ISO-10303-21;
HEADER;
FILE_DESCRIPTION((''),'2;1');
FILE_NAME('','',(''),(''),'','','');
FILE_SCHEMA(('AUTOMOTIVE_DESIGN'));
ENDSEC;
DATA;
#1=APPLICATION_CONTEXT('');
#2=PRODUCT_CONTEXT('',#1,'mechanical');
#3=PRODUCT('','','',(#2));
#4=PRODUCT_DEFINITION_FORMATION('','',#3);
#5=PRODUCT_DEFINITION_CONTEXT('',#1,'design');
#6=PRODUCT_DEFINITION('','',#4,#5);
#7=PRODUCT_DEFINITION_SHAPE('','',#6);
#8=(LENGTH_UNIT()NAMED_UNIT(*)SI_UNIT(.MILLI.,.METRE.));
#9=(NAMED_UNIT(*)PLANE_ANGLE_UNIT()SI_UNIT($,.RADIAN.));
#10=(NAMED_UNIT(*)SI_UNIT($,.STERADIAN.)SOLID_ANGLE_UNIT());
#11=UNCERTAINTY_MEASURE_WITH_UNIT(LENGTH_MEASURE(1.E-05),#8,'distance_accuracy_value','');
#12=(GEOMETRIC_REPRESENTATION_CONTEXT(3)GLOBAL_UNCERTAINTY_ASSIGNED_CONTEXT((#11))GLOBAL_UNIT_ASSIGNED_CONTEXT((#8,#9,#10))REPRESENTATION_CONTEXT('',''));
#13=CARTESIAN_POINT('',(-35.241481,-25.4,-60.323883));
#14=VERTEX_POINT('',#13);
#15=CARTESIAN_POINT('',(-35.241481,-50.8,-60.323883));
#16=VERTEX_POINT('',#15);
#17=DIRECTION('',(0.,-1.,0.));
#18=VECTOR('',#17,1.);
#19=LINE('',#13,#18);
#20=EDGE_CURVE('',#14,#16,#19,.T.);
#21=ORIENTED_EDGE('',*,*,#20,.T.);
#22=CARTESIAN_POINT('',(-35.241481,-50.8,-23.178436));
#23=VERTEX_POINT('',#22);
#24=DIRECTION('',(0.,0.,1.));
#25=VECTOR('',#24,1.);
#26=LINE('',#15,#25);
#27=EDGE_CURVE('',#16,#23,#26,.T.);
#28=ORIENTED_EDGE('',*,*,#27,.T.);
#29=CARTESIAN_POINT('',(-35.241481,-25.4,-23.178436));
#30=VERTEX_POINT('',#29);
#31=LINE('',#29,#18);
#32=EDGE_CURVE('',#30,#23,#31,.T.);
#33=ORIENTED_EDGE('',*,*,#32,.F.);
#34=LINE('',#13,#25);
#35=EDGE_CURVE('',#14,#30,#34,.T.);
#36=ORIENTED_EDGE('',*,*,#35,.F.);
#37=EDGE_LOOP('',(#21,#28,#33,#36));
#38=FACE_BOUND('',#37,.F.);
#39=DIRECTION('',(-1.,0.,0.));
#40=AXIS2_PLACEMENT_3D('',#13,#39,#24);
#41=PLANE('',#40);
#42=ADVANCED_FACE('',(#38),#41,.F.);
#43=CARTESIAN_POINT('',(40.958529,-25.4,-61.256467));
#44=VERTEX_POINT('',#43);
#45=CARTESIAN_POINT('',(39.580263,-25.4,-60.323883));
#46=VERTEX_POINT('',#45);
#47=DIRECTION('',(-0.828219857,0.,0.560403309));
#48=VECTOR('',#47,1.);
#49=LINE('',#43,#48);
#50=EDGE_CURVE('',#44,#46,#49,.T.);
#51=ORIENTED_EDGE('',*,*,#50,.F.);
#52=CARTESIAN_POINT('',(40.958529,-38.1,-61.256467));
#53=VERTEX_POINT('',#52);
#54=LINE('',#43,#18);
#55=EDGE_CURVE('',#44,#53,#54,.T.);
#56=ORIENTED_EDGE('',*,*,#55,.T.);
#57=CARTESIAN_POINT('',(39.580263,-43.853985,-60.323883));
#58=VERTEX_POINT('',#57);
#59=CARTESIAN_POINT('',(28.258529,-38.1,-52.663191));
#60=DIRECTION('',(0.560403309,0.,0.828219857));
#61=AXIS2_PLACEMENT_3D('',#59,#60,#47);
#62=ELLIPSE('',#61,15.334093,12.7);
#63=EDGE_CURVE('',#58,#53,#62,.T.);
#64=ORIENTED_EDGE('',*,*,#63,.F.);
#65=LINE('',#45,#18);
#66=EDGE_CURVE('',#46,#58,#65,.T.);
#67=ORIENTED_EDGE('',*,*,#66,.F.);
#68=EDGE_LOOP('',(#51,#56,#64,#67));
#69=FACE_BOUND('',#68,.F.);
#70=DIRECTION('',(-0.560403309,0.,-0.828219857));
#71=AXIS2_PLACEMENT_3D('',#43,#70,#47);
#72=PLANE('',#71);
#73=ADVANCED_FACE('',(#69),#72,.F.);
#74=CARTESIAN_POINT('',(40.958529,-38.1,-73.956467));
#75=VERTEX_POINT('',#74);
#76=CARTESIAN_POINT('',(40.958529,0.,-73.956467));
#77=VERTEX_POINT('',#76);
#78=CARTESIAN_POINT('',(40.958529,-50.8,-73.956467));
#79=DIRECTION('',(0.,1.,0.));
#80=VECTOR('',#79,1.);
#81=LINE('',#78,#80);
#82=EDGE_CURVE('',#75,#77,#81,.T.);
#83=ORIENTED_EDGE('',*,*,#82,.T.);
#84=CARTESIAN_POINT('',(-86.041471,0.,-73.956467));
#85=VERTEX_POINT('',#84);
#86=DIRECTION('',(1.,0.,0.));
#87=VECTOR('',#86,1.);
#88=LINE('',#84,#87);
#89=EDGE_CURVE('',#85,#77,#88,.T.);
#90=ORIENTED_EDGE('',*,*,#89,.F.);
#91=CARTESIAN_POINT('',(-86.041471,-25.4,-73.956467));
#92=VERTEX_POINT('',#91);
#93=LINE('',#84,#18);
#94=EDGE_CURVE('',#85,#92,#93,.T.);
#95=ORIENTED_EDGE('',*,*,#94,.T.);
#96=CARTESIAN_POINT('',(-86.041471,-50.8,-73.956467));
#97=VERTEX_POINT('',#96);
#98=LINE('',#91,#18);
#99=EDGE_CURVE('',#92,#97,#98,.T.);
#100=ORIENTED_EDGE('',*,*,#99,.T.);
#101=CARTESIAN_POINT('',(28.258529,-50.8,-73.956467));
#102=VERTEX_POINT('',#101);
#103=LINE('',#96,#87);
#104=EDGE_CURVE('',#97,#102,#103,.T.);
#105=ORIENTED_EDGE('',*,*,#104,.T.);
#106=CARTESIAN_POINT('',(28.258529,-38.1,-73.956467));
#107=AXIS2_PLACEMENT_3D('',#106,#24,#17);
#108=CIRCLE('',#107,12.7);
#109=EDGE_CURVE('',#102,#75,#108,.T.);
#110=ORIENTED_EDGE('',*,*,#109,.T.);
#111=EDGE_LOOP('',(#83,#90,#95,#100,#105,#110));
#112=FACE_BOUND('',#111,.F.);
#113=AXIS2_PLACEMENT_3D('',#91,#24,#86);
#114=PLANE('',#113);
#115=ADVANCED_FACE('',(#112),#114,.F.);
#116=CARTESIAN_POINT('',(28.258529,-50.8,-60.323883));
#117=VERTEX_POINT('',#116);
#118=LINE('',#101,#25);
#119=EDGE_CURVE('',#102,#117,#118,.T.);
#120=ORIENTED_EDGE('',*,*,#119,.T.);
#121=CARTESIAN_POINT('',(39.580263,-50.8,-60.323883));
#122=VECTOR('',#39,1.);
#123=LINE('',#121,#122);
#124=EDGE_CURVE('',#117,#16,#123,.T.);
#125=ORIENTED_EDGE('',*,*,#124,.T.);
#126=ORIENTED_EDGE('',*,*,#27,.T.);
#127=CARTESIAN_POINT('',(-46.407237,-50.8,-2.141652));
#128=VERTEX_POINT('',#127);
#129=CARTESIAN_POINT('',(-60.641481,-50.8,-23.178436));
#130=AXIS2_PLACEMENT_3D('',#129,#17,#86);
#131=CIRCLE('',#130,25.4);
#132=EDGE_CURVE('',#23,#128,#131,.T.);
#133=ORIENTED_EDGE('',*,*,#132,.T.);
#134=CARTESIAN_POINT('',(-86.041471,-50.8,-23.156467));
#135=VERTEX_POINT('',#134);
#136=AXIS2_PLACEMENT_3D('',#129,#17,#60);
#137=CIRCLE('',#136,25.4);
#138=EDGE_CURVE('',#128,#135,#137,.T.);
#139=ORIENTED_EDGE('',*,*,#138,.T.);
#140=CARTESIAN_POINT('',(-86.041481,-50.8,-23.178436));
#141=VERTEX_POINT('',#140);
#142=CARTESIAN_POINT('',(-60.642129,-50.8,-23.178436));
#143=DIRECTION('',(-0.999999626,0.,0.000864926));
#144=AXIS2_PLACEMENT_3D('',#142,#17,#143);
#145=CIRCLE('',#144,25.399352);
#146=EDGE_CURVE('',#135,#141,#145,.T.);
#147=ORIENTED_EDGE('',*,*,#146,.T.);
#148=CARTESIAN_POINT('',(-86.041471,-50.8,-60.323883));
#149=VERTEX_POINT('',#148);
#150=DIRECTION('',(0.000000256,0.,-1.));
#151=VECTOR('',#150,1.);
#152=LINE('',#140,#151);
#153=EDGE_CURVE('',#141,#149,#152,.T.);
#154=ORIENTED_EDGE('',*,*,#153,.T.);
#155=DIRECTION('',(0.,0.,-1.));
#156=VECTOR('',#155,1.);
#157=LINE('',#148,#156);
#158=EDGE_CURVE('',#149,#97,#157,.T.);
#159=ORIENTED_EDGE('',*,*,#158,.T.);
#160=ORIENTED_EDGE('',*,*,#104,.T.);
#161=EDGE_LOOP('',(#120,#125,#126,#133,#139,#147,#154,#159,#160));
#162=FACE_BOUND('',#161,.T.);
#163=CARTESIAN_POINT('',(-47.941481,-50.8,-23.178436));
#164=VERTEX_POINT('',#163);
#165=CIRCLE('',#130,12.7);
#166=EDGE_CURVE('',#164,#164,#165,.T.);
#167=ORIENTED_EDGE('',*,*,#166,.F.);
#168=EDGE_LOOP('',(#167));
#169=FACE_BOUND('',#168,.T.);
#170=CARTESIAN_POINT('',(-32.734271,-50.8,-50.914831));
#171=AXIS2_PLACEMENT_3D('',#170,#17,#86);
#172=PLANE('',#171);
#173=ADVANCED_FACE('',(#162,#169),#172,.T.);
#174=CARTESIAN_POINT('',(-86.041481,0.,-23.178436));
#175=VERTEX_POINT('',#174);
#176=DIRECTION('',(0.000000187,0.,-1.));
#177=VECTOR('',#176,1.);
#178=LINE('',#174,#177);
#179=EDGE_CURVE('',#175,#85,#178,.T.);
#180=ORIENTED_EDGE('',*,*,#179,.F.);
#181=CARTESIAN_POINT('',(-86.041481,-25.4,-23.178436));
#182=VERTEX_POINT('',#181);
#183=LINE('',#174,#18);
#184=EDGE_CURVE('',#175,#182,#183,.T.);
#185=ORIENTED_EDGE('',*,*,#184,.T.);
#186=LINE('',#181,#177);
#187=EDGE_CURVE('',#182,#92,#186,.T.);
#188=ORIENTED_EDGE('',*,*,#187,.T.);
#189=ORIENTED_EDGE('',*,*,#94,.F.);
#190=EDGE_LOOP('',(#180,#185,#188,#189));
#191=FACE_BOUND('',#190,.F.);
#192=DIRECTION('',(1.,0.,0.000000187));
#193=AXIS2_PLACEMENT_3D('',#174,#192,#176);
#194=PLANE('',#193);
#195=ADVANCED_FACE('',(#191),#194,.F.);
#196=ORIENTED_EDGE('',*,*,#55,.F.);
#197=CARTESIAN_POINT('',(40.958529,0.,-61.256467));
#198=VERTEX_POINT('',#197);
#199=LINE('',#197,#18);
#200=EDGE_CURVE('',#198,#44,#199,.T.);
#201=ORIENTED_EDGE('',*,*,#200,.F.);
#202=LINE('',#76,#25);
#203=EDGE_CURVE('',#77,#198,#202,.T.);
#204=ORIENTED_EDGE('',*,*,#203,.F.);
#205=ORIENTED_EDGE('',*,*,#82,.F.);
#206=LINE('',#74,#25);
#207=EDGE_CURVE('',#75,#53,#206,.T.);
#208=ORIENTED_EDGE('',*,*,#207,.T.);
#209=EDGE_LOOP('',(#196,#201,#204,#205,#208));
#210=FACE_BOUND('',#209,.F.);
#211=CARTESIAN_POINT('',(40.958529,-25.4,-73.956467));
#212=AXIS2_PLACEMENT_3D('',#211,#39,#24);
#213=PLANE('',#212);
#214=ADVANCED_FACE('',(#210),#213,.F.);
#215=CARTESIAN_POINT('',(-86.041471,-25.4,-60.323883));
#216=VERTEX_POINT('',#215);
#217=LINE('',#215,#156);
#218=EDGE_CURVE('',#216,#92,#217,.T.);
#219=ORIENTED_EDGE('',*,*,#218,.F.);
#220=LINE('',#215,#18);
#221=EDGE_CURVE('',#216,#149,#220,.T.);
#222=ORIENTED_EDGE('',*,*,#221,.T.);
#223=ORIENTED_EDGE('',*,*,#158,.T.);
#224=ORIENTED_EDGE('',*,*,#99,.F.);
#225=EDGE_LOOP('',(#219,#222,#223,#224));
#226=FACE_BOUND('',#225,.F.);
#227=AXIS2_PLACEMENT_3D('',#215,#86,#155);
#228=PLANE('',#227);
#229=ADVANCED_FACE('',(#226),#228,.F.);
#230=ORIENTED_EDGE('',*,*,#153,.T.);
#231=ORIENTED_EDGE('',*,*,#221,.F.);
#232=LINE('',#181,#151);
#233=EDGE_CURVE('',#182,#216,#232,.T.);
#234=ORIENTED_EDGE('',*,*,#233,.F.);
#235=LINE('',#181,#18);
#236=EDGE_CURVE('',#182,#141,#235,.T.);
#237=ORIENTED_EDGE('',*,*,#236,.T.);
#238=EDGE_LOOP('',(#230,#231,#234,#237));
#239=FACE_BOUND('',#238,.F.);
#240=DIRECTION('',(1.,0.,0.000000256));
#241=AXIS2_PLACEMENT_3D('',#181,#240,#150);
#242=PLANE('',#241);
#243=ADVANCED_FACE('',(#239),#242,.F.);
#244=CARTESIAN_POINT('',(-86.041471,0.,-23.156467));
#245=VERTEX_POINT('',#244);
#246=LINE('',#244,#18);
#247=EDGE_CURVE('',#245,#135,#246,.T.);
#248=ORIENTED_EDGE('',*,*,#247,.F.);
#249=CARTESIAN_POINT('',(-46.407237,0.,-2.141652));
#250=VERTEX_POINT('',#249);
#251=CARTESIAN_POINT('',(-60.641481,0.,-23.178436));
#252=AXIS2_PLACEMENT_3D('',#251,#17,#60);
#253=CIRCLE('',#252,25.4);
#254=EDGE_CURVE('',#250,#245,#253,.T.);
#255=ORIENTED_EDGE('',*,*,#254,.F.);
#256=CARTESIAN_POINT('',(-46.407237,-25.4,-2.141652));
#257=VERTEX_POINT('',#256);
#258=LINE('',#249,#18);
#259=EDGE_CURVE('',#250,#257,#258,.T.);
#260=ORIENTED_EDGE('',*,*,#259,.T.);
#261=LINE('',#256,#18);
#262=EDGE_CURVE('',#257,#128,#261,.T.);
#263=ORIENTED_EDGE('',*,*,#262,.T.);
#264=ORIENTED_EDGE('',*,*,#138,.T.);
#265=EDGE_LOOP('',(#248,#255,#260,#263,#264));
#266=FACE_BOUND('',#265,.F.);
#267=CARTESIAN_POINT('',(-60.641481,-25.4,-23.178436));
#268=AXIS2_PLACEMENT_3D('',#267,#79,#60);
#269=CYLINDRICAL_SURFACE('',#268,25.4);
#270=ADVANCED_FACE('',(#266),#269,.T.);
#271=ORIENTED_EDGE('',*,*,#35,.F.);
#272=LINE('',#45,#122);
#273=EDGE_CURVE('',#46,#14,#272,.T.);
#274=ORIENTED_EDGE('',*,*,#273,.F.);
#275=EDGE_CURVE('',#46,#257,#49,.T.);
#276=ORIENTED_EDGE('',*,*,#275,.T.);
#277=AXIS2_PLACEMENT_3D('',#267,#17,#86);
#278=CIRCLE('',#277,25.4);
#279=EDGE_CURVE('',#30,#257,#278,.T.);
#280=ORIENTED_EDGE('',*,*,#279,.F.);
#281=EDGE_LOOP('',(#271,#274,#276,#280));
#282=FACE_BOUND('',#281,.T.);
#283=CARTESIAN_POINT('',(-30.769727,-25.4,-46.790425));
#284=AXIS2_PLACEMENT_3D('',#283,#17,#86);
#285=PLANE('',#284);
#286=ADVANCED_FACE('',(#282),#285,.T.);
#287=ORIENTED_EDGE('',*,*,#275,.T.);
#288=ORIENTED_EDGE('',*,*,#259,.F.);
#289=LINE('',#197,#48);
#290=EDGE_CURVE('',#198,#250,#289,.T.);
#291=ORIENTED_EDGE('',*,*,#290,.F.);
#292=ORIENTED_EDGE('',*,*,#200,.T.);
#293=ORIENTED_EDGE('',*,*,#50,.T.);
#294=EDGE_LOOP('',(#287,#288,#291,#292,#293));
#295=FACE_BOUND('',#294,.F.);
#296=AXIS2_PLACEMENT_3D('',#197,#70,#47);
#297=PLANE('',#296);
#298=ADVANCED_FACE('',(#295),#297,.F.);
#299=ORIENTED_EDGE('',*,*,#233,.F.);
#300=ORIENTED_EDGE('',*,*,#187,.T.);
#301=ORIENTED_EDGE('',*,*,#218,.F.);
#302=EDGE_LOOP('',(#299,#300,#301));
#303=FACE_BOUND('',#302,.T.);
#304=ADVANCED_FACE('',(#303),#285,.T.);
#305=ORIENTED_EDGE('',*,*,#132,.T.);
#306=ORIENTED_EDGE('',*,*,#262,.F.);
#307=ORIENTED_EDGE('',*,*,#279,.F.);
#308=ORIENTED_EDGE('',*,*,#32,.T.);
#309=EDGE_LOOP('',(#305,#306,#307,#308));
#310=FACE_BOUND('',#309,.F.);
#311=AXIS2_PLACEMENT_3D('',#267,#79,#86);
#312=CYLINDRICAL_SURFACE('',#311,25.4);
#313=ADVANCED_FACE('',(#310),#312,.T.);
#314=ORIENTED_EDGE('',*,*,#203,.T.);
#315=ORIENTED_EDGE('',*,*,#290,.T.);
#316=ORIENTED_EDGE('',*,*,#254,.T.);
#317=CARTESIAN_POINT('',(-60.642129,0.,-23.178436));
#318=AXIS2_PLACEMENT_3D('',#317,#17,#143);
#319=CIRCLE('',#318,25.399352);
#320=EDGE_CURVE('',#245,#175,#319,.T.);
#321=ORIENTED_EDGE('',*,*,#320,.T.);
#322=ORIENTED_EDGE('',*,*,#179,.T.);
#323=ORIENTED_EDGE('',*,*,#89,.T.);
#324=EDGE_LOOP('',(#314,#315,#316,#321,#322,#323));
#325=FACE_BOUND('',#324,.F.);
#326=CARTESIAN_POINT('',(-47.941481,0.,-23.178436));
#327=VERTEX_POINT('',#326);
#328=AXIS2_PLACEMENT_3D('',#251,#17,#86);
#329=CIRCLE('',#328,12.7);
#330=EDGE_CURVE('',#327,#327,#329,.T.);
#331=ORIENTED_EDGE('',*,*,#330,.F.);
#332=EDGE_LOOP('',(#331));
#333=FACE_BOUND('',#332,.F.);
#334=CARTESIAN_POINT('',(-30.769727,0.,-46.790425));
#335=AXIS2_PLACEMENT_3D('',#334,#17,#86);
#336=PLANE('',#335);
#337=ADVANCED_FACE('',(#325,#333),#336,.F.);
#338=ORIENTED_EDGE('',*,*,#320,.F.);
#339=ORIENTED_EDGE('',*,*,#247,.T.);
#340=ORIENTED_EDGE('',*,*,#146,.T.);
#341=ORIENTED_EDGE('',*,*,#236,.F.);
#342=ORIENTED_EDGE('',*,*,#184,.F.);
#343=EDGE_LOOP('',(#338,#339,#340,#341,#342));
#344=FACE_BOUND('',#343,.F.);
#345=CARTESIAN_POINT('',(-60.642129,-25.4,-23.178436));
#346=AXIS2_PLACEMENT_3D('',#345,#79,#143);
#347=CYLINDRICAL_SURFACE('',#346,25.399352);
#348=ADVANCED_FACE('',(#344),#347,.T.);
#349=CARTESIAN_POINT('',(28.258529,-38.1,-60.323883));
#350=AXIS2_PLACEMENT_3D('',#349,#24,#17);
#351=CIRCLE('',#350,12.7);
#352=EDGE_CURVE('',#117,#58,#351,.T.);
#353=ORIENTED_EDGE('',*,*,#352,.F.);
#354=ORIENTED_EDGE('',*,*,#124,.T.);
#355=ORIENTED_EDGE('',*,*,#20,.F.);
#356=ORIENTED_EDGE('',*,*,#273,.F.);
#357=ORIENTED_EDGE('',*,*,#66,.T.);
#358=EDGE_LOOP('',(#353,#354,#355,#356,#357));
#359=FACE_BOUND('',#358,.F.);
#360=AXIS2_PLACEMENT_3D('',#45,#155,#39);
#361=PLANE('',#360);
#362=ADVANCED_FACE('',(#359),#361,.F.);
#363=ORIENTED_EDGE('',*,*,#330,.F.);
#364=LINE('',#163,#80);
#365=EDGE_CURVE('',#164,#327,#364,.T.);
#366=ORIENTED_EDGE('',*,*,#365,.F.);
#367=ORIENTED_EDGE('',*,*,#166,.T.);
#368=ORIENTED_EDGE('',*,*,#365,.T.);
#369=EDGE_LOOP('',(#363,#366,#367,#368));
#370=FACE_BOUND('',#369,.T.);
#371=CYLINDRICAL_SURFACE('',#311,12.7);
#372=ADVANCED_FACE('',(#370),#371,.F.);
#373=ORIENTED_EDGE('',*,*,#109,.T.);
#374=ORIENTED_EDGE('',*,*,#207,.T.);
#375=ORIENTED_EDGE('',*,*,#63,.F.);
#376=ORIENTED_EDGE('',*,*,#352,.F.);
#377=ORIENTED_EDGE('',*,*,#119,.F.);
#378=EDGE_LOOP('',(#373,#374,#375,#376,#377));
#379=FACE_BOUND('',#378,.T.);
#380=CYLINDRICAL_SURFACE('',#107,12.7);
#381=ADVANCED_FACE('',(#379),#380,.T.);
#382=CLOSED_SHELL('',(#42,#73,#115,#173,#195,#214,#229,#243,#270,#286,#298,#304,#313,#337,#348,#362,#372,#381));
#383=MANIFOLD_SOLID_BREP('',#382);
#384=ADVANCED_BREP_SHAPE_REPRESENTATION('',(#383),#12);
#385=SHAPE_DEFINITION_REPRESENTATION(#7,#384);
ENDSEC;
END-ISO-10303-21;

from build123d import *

# Parameters (mm, degrees)
F0_R     = 12.7
F1_DEPTH = 25.4
F2_R     = 12.7
F3_DEPTH = 25.4
F4_R     = 12.7


# Not quite as in the source:
# - ends of sketch curves that miss each other by under 0.0002 mm in the source are joined


with BuildPart() as f1:
    # F0 (on Front) → F1 (new body)
    with BuildSketch(Plane.XZ):
        with BuildLine():
            Line((40.9585287035, -61.2564672112), (-46.4072367427, -2.1416516533))
            ThreePointArc((-46.4072367427, -2.1416516533), (-72.5399719473, -0.7377161417), (-86.0414712965, -23.1564672112))
            ThreePointArc((-86.0414712965, -23.1564672112), (-86.041478422, -23.1674516111), (-86.0414807971, -23.1784360131))
            Line((-86.0414807971, -23.1784360131), (-86.0414712965, -73.9564672112))
            Line((-86.0414712965, -73.9564672112), (40.9585287035, -73.9564672112))
            Line((40.9585287035, -73.9564672112), (40.9585287035, -61.2564672112))
        make_face()
        with Locations((-60.6414807971, -23.1784360131)):
            Circle(F0_R, mode=Mode.SUBTRACT)
    extrude(amount=F1_DEPTH)

    # F2 (on face) → F3 (join)
    with BuildSketch(Plane.XZ.offset(25.4)):
        with BuildLine():
            Line((-35.2414807971, -60.323882848), (-35.2414807971, -23.1784360131))
            ThreePointArc((-35.2414807971, -23.1784360131), (-38.2059086071, -11.2702413343), (-46.4072367427, -2.1416516533))
            ThreePointArc((-46.4072367427, -2.1416516533), (-72.5399719473, -0.7377161417), (-86.0414712965, -23.1564672112))
            ThreePointArc((-86.0414712965, -23.1564672112), (-86.041478422, -23.1674516111), (-86.0414807971, -23.1784360131))
            Line((-86.0414807971, -23.1784360131), (-86.0414712965, -60.323882848))
            Line((-86.0414712965, -60.323882848), (-86.0414712965, -73.9564672112))
            Line((-86.0414712965, -73.9564672112), (40.9585287035, -73.9564672112))
            Line((40.9585287035, -73.9564672112), (40.9585287035, -61.2564672112))
            Line((40.9585287035, -61.2564672112), (39.5802625959, -60.323882848))
            Line((39.5802625959, -60.323882848), (-35.2414807971, -60.323882848))
        make_face()
        with Locations((-60.6414807971, -23.1784360131)):
            Circle(F2_R, mode=Mode.SUBTRACT)
    extrude(amount=F3_DEPTH)

    # F4
    f4_edges = [f1.edges().sort_by_distance(p)[0] for p in [
        (40.958529, -50.8, -67.606467),
    ]]
    fillet(f4_edges, radius=F4_R)


solid = f1.part
